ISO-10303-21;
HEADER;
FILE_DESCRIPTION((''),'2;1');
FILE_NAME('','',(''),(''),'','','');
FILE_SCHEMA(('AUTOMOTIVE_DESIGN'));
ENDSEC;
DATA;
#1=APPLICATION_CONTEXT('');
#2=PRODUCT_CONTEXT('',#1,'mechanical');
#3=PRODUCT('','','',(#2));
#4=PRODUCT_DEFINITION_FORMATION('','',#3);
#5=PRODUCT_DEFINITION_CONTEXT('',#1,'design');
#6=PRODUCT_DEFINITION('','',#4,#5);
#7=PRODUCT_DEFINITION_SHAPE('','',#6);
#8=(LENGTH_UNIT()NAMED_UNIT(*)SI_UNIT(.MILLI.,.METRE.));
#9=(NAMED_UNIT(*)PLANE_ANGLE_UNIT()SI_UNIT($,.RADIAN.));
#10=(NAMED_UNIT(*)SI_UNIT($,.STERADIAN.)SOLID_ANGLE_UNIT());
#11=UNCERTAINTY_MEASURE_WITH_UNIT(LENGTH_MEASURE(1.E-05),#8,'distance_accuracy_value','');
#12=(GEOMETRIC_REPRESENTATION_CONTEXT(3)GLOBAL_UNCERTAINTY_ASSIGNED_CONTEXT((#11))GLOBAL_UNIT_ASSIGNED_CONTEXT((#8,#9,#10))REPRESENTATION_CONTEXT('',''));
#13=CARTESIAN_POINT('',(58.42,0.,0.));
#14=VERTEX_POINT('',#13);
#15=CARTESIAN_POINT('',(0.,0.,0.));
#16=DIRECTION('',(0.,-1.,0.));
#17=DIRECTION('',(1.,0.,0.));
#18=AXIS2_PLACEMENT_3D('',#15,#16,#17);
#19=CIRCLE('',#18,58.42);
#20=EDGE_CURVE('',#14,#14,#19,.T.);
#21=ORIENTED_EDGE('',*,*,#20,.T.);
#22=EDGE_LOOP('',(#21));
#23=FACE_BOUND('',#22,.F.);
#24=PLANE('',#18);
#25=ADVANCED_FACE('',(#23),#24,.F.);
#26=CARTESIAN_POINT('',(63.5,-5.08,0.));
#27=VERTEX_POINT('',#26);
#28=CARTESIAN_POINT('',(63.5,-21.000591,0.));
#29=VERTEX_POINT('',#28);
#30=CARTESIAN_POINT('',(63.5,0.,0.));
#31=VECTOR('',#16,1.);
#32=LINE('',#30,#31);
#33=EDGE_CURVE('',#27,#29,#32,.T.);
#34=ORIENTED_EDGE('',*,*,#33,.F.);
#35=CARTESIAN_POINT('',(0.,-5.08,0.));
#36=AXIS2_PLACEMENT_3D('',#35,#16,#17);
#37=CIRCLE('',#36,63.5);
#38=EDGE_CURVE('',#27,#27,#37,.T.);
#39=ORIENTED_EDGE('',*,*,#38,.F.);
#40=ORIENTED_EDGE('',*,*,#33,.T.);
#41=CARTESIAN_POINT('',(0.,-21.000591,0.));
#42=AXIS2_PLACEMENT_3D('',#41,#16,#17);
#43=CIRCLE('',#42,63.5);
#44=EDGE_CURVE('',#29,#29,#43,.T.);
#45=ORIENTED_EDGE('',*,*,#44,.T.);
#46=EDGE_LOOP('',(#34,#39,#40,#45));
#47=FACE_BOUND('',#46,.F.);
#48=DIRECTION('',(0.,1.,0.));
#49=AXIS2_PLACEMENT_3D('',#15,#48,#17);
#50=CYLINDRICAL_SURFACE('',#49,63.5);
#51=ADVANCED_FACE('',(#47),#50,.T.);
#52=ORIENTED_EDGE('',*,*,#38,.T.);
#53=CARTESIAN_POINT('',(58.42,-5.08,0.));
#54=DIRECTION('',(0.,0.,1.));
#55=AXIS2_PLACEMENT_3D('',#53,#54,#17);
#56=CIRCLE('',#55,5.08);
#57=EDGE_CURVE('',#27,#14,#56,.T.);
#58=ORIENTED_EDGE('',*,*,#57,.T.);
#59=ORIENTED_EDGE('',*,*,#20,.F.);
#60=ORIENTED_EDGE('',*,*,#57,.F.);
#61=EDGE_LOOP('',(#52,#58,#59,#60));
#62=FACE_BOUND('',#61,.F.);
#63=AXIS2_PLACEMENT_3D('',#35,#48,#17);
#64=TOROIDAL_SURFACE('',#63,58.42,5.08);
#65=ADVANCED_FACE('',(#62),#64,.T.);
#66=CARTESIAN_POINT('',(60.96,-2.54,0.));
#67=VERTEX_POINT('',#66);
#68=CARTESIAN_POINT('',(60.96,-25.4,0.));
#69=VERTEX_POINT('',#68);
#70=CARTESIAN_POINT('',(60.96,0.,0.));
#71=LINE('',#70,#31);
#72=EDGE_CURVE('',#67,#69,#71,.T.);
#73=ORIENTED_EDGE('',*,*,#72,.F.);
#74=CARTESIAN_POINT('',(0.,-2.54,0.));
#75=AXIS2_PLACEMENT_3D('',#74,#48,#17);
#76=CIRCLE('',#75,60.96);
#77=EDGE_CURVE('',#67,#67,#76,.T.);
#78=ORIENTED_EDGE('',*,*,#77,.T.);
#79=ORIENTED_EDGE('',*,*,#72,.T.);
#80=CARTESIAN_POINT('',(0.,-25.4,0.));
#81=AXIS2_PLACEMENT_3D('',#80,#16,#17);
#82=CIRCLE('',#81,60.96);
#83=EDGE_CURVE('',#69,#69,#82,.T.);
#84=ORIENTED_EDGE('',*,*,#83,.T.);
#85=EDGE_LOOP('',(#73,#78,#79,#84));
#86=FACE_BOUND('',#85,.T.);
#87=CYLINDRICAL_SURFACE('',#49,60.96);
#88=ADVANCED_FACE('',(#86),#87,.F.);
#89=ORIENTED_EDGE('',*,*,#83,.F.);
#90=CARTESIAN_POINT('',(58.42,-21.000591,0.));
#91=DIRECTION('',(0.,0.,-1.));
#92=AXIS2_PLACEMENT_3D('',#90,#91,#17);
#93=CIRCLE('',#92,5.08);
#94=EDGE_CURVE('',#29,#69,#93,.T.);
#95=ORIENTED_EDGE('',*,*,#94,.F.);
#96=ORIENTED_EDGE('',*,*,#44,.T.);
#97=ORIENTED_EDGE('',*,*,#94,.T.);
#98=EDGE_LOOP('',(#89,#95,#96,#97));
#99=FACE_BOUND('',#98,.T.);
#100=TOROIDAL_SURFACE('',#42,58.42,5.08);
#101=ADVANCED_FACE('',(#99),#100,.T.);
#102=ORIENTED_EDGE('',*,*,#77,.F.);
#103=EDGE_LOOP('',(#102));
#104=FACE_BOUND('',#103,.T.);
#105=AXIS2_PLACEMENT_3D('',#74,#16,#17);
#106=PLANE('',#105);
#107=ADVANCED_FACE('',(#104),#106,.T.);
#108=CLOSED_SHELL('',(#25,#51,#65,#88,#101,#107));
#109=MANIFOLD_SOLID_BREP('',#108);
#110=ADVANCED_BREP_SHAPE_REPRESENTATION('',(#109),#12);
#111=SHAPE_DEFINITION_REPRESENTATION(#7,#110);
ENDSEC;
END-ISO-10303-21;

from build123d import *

# Parameters (mm, degrees)
F0_R     = 63.5
F1_DEPTH = 25.4
F2_T     = -2.54


# Not quite as in the source:
# - a fillet or chamfer that OpenCascade refuses, or shapes differently, is made with other operations: its cross-section is extruded or revolved along the edge and cut away or added


with BuildPart() as f1:
    # F0 (on Front) → F1 (new body)
    with BuildSketch(Plane.XZ):
        Circle(F0_R)
    extrude(amount=F1_DEPTH)

    # F2
    f2_openings = [f1.faces().sort_by_distance(p)[0] for p in [
        (0, -25.4, 0),
    ]]
    offset(amount=F2_T, openings=f2_openings)

    # F3: fillet of radius 5.08 on 3 edges, made by hand

    # F3_s1 → F3_t2 (revolve, cut)
    with BuildSketch(Plane.XY):
        with BuildLine():
            ThreePointArc((63.5, -5.08), (62.0121024484, -1.4878975516), (58.42, 0))
            Line((58.42, 0), (63.5, 0))
            Line((63.5, 0), (63.5, -5.08))
        make_face()
    revolve(axis=Axis((0, 0, 0), (0, -1, 0)), mode=Mode.SUBTRACT)

    # F3_s3 → F3_t4 (revolve, cut)
    with BuildSketch(Plane.XY):
        with BuildLine():
            ThreePointArc((63.5, -21.0005909488), (62.8194090512, -23.5405909488), (60.96, -25.4))
            Line((60.96, -25.4), (63.5, -25.4))
            Line((63.5, -25.4), (63.5, -21.0005909488))
        make_face()
    revolve(axis=Axis((0, -25.4, 0), (0, -1, 0)), mode=Mode.SUBTRACT)


solid = f1.part
